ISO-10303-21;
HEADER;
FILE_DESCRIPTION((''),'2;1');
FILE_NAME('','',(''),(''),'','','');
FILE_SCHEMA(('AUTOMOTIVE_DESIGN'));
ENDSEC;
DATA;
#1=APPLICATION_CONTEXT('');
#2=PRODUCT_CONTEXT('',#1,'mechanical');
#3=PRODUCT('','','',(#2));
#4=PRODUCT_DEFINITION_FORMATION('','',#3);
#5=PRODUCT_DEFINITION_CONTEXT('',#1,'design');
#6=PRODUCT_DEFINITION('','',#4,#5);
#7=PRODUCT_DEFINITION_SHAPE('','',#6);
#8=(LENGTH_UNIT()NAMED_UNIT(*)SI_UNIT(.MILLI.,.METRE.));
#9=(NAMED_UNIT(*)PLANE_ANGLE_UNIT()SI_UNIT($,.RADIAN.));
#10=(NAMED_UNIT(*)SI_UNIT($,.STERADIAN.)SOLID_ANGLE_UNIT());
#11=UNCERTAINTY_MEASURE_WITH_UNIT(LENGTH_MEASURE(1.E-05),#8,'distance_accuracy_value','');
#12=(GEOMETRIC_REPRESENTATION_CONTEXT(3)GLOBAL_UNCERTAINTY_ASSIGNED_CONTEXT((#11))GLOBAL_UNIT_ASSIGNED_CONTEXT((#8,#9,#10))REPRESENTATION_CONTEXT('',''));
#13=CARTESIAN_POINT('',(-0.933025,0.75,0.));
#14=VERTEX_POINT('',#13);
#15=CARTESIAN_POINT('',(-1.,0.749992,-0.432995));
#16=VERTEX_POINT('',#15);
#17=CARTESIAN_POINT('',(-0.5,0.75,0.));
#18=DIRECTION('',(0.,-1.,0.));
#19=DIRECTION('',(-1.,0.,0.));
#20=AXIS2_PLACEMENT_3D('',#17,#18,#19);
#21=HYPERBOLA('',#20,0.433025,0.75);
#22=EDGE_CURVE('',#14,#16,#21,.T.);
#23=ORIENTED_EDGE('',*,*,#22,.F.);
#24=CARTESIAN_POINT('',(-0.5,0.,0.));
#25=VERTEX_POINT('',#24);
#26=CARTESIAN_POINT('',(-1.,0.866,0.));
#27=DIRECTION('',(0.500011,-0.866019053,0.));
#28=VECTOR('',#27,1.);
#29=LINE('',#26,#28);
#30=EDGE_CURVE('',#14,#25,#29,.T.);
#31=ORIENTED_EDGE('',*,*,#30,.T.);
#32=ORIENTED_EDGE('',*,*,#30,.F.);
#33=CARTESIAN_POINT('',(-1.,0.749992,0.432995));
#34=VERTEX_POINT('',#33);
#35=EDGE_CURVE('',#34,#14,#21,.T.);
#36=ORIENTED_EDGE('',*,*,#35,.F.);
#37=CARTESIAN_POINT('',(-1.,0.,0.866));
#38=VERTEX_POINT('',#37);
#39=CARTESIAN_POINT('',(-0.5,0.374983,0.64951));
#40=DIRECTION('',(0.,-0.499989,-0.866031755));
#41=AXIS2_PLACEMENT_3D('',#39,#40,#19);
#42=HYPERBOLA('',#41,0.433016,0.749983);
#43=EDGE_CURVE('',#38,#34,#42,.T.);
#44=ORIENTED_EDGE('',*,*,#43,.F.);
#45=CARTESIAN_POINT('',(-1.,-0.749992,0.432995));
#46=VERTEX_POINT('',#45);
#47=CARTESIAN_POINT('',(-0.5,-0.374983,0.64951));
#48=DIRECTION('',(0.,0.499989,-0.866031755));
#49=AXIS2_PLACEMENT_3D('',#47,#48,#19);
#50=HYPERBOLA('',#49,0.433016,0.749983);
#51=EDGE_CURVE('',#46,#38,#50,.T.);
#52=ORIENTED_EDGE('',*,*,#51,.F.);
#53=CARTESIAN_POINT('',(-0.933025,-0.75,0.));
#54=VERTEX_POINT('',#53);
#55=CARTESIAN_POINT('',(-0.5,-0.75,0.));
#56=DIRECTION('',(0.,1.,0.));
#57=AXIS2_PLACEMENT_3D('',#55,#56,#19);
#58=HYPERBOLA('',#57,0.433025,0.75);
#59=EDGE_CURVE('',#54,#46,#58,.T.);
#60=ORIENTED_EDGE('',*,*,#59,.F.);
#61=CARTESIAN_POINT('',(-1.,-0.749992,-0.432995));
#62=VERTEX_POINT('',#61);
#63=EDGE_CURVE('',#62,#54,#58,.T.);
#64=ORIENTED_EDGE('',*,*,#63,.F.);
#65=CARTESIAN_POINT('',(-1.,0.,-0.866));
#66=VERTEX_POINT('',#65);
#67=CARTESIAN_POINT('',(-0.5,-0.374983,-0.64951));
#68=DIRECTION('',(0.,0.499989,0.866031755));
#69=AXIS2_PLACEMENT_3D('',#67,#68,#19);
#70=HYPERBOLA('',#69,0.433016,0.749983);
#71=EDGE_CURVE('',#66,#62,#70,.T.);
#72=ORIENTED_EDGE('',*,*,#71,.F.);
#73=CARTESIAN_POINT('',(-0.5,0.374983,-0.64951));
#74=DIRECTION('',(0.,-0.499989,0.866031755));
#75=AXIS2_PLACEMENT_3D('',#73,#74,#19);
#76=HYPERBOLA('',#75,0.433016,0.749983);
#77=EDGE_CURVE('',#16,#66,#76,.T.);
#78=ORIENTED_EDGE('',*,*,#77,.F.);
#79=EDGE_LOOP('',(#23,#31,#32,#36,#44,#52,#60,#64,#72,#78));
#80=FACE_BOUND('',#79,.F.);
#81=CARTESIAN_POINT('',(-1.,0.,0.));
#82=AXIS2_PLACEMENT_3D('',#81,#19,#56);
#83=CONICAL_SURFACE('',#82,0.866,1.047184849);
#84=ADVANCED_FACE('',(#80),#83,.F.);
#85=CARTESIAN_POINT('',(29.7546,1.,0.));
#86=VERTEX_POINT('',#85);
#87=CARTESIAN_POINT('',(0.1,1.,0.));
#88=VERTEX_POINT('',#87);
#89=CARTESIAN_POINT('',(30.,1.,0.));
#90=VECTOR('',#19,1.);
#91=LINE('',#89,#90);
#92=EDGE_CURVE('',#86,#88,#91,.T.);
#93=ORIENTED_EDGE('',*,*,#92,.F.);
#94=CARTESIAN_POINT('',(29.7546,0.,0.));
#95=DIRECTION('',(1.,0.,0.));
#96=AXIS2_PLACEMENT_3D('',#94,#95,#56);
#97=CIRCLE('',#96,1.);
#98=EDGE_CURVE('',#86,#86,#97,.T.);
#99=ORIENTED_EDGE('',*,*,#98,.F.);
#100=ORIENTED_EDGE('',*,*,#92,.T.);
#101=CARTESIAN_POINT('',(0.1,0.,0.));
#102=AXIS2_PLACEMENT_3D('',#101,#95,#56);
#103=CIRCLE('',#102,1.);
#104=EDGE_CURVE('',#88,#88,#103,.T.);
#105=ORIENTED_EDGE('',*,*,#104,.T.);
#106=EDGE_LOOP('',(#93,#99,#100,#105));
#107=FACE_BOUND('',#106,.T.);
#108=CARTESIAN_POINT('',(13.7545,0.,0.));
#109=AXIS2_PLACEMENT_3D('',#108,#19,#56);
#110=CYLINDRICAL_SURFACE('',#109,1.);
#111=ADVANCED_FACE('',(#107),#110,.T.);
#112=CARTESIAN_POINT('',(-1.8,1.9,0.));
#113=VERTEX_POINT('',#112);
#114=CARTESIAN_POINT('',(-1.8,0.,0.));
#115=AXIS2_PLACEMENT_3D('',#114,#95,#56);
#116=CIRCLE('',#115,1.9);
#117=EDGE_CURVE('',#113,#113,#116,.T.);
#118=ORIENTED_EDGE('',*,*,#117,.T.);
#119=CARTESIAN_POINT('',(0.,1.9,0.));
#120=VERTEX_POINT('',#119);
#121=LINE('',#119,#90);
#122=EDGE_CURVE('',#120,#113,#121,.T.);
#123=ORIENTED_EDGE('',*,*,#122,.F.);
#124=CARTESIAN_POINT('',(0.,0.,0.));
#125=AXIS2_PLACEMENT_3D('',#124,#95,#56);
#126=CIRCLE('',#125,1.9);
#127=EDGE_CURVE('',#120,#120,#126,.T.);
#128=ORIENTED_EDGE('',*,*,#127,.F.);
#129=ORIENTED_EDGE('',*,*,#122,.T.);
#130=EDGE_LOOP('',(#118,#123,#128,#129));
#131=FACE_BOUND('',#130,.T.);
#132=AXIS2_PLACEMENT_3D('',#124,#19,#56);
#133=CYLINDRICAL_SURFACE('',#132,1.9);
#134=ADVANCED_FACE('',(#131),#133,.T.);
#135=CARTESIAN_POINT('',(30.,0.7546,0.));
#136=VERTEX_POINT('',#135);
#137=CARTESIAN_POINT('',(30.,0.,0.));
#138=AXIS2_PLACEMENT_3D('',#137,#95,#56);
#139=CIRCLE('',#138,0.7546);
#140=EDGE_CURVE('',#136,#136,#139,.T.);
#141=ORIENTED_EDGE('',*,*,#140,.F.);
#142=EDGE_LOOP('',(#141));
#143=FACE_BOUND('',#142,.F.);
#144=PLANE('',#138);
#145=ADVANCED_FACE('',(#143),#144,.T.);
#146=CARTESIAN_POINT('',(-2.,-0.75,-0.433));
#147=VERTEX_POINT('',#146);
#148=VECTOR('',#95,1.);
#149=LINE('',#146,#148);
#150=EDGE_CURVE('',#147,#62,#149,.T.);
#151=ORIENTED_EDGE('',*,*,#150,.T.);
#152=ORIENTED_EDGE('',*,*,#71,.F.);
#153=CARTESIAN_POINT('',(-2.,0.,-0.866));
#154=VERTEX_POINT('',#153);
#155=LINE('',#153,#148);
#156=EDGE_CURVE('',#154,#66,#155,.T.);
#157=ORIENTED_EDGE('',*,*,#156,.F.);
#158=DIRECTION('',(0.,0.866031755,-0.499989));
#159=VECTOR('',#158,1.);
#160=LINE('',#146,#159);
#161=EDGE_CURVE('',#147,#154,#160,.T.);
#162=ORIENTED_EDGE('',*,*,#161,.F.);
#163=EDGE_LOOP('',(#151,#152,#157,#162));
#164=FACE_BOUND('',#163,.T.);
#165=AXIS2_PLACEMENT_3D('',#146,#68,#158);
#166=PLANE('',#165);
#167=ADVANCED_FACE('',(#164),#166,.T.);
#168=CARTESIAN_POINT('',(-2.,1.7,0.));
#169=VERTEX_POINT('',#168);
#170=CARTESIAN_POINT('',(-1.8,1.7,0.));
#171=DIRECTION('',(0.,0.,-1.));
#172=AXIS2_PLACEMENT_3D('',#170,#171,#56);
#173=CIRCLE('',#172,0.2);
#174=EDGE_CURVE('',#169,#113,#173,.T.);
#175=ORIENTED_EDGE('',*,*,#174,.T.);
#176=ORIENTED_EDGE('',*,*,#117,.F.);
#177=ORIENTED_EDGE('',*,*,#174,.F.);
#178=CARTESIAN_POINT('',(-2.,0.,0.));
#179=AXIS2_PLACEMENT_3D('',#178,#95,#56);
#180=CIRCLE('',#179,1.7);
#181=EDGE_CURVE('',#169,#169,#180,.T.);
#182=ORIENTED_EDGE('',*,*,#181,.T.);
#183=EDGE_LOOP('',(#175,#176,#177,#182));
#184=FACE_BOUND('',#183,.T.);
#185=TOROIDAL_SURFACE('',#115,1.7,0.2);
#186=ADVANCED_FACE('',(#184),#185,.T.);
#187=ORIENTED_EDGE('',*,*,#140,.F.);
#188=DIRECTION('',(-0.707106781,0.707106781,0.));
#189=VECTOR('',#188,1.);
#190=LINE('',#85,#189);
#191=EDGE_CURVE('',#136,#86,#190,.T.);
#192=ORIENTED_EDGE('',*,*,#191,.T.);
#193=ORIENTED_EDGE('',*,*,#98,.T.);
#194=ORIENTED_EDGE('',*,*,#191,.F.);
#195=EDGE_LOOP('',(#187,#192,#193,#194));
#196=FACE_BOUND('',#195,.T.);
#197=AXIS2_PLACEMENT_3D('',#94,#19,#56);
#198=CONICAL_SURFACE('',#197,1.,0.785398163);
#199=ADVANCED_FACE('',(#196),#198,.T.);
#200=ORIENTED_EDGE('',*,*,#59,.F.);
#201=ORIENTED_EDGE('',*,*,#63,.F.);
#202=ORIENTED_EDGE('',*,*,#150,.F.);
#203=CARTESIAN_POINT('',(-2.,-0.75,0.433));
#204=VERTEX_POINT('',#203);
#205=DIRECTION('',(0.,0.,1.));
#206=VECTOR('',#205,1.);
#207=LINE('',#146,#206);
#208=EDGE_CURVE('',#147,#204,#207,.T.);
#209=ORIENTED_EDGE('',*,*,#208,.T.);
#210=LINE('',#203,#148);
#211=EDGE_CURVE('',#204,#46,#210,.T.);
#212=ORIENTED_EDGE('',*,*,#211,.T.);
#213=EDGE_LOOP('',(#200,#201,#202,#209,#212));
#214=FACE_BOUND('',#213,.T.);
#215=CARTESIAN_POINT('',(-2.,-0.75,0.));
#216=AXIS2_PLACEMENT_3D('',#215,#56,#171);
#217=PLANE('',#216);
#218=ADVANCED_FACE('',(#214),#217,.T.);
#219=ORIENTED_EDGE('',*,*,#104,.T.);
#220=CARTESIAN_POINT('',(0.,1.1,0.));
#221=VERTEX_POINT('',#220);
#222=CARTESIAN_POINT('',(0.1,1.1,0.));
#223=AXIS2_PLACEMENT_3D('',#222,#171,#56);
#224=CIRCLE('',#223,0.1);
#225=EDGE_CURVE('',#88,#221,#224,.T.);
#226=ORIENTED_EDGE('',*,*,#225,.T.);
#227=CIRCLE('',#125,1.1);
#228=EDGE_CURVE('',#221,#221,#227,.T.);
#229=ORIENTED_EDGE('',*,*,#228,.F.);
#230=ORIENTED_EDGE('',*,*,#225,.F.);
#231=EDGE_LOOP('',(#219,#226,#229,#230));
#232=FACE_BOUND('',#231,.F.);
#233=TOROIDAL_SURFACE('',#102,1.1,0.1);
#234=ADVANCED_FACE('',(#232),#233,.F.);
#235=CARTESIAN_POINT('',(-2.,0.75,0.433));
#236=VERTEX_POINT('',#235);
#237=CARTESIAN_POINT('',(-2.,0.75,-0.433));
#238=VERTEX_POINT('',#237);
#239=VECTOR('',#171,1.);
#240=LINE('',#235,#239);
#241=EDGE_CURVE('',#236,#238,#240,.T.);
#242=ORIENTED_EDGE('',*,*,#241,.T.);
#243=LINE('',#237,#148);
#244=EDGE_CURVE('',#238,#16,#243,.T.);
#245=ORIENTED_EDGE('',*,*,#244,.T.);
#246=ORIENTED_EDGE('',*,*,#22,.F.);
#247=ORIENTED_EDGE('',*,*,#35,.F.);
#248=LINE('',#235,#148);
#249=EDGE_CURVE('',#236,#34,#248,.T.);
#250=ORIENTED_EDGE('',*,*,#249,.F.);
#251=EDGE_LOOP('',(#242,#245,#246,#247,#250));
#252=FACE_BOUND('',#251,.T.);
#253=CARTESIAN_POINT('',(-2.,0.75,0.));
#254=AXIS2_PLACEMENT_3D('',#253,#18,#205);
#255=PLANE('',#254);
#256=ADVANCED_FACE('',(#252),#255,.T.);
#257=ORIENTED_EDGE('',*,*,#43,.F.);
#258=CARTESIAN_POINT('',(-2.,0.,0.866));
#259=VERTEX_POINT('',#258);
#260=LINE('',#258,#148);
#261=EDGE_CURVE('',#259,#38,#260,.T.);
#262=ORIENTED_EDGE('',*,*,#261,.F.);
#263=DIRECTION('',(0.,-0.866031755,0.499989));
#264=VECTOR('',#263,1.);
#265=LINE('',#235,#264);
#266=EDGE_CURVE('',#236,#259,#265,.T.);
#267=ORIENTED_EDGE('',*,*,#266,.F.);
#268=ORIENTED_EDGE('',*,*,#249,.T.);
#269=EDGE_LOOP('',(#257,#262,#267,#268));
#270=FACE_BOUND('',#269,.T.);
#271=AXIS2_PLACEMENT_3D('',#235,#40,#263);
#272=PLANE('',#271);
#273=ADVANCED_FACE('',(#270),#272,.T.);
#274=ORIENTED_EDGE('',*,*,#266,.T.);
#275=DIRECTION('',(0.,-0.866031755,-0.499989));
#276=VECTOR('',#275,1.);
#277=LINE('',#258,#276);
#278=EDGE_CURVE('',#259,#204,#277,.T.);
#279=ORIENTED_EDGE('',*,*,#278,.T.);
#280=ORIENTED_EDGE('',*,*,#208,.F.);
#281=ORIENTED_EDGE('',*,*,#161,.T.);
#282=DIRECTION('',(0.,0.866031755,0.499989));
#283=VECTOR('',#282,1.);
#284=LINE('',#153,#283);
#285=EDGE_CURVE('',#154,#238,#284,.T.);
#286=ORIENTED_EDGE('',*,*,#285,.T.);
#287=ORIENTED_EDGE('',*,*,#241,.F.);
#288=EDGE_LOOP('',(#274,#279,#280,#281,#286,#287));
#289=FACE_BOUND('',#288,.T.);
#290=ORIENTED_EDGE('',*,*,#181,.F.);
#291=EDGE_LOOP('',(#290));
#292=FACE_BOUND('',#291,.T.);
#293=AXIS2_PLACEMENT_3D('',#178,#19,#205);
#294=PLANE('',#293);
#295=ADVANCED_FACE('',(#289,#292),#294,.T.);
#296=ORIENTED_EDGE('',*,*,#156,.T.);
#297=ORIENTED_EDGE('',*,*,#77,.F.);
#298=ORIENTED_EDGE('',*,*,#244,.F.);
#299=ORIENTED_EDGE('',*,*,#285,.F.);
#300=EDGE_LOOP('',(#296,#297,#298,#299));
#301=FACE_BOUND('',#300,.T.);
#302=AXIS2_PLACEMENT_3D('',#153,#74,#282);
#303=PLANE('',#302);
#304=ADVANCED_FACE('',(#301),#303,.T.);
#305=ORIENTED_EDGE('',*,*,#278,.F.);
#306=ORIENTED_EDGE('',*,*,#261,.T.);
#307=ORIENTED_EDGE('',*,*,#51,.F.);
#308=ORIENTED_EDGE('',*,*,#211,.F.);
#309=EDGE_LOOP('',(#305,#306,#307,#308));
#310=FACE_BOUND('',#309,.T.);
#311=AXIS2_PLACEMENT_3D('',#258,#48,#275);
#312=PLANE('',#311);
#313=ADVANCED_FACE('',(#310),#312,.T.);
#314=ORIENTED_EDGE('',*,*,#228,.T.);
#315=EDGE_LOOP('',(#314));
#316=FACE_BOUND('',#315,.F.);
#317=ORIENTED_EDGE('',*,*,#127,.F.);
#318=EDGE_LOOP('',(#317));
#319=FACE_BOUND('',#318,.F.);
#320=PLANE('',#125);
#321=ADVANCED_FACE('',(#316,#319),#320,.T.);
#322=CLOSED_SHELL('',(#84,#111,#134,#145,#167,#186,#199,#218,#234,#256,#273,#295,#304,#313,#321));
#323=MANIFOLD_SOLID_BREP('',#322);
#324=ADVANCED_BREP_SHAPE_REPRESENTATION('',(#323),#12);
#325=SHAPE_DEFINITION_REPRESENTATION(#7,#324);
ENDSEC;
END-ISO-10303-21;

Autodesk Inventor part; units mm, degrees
ref_plane "YZ Plane" through (0, 0, 0) normal (1, 0, 0) x (0, 1, 0)
ref_plane "XZ Plane" through (0, 0, 0) normal (0, 1, 0) x (-1, 0, 0)
sketch "Boceto1" plane through (0, 0, 0) normal (0, 0, 1) x (1, 0, 0)
  line L0 (-0.5, 0) -> (30, 0)
  line L1 (30, 0) -> (30, 1)
  line L2 (30, 1) -> (14, 1)
  line L3 (14, 1) -> (13.7545, 1)
  line L4 (13.7545, 1) -> (0, 1)
  line L5 (0, 1) -> (0, 1.9)
  line L6 (0, 1.9) -> (-2, 1.9)
  line L7 (-2, 1.9) -> (-2, 0.866)
  line L8 (-2, 0.866) -> (-1, 0.866)
  line L9 (-1, 0.866) -> (-0.5, 0)
  line L10 (-8.4, 0) -> (36.4, 0) projected
  line L11 (0, -0.38) -> (0, 2.28) projected
  line L12 (14, 1) -> (0, 1) construction
  dimension "d1" = 16
  dimension "d2" = 0.2455
  dimension "d3" = 2
  dimension "d4" = 1
  dimension "d5" = 60
  dimension "d6" = 2
  dimension "d7" = 2
  dimension "d8" = 1.7321
  dimension "d9" = 3.8
  dimension "d26" = 30
revolve "Cuerpo" add sketch "Boceto1" angle 360 about axis through (-0.5, 0, 0) along (1, 0, 0)
sketch "Boceto2" plane through (-2, 0, 0) normal (-1, 0, 0) x (0, 0, 1)
  circle A0 centre (0, 0) radius 0.866 projected
  line L0 (0, -2.66) -> (0, 2.66) projected
  line L1 (-2.66, 0) -> (2.66, 0) projected
  line L2 (0.866, 0) -> (0.433, -0.75)
  line L3 (0.433, -0.75) -> (-0.433, -0.75)
  line L4 (-0.433, -0.75) -> (-0.866, 0)
  line L5 (-0.866, 0) -> (-0.433, 0.75)
  line L6 (-0.433, 0.75) -> (0.433, 0.75)
  line L7 (0.433, 0.75) -> (0.866, 0)
extrude "Ranura" add sketch "Boceto2" against normal up to next contours L7 A0 | A0 L2 | L6 L0 A0 | A0 L0 L3 | L0 L6 A0 | A0 L3 L0 | L4 A0 | A0 L5
fillet "Empalme1" radius 0.2 1 edges at (-2, -1.9, 0)
thread "Rosca" size "M2x0.4" class "6g" standard "ISO Metric profile" length 16
chamfer "Chaflán1" distance 0.2454 distance2 0.2454 1 edges at (30, -1, 0) measured on face at (30, -0.3275, -0.4215)
ref_plane "Work Plane1" through (29, 0, 0) normal (0, -1, 0) x (1, 0, 0)
fillet "Fillet2" radius 0.1 1 edges at (0, -1, 0)
equation "\"d1\" = GEL"
equation "\"d3\" = KOH"
equation "\"d4\" = INTI"
equation "\"d6\" = GD"
equation "\"d7\" = BDM"
equation "\"d8\" = 1.1547 * SW"
equation "\"d9\" = KOD"
equation "\"d26\" = NLG"
equation "\"d30\" = R"
equation "\"d17\" = RR"
equation "\"d13\" = GEL"
equation "\"d15\" = -0.5 * SPD + 0.5 * GD"
equation "\"d16\" = GUL"
equation "\"GD\" = NND"
equation "\"NLG\" = 30"
equation "\"GEL\" = 16"
equation "\"KOD\" = 3.8"
equation "\"KOH\" = 2"
equation "\"INTI\" = 1"
equation "\"GAL\" = 0.61345 * PTC"
equation "\"GUL\" = 0.61345 * PTC"
equation "\"BDM\" = NND"
equation "\"SW\" = 1.5"
equation "\"RR\" = 0.2"
equation "\"SPD\" = 1.50924"
equation "\"R\" = 0.1"
equation "\"TOA\" = 30deg"
equation "\"THREADDIA\" = 2"
equation "\"PTC\" = 0.4"
equation "\"NND\" = 2"
equation "\"E0\" = 1.155 * SW"
equation "\"GD1\" = THREADDIA - 1.2269 * PTC"
properties part number "ANSI B18.3.1M - M2x0,4 x 30, FSHCSM" material "Acero, suave"
